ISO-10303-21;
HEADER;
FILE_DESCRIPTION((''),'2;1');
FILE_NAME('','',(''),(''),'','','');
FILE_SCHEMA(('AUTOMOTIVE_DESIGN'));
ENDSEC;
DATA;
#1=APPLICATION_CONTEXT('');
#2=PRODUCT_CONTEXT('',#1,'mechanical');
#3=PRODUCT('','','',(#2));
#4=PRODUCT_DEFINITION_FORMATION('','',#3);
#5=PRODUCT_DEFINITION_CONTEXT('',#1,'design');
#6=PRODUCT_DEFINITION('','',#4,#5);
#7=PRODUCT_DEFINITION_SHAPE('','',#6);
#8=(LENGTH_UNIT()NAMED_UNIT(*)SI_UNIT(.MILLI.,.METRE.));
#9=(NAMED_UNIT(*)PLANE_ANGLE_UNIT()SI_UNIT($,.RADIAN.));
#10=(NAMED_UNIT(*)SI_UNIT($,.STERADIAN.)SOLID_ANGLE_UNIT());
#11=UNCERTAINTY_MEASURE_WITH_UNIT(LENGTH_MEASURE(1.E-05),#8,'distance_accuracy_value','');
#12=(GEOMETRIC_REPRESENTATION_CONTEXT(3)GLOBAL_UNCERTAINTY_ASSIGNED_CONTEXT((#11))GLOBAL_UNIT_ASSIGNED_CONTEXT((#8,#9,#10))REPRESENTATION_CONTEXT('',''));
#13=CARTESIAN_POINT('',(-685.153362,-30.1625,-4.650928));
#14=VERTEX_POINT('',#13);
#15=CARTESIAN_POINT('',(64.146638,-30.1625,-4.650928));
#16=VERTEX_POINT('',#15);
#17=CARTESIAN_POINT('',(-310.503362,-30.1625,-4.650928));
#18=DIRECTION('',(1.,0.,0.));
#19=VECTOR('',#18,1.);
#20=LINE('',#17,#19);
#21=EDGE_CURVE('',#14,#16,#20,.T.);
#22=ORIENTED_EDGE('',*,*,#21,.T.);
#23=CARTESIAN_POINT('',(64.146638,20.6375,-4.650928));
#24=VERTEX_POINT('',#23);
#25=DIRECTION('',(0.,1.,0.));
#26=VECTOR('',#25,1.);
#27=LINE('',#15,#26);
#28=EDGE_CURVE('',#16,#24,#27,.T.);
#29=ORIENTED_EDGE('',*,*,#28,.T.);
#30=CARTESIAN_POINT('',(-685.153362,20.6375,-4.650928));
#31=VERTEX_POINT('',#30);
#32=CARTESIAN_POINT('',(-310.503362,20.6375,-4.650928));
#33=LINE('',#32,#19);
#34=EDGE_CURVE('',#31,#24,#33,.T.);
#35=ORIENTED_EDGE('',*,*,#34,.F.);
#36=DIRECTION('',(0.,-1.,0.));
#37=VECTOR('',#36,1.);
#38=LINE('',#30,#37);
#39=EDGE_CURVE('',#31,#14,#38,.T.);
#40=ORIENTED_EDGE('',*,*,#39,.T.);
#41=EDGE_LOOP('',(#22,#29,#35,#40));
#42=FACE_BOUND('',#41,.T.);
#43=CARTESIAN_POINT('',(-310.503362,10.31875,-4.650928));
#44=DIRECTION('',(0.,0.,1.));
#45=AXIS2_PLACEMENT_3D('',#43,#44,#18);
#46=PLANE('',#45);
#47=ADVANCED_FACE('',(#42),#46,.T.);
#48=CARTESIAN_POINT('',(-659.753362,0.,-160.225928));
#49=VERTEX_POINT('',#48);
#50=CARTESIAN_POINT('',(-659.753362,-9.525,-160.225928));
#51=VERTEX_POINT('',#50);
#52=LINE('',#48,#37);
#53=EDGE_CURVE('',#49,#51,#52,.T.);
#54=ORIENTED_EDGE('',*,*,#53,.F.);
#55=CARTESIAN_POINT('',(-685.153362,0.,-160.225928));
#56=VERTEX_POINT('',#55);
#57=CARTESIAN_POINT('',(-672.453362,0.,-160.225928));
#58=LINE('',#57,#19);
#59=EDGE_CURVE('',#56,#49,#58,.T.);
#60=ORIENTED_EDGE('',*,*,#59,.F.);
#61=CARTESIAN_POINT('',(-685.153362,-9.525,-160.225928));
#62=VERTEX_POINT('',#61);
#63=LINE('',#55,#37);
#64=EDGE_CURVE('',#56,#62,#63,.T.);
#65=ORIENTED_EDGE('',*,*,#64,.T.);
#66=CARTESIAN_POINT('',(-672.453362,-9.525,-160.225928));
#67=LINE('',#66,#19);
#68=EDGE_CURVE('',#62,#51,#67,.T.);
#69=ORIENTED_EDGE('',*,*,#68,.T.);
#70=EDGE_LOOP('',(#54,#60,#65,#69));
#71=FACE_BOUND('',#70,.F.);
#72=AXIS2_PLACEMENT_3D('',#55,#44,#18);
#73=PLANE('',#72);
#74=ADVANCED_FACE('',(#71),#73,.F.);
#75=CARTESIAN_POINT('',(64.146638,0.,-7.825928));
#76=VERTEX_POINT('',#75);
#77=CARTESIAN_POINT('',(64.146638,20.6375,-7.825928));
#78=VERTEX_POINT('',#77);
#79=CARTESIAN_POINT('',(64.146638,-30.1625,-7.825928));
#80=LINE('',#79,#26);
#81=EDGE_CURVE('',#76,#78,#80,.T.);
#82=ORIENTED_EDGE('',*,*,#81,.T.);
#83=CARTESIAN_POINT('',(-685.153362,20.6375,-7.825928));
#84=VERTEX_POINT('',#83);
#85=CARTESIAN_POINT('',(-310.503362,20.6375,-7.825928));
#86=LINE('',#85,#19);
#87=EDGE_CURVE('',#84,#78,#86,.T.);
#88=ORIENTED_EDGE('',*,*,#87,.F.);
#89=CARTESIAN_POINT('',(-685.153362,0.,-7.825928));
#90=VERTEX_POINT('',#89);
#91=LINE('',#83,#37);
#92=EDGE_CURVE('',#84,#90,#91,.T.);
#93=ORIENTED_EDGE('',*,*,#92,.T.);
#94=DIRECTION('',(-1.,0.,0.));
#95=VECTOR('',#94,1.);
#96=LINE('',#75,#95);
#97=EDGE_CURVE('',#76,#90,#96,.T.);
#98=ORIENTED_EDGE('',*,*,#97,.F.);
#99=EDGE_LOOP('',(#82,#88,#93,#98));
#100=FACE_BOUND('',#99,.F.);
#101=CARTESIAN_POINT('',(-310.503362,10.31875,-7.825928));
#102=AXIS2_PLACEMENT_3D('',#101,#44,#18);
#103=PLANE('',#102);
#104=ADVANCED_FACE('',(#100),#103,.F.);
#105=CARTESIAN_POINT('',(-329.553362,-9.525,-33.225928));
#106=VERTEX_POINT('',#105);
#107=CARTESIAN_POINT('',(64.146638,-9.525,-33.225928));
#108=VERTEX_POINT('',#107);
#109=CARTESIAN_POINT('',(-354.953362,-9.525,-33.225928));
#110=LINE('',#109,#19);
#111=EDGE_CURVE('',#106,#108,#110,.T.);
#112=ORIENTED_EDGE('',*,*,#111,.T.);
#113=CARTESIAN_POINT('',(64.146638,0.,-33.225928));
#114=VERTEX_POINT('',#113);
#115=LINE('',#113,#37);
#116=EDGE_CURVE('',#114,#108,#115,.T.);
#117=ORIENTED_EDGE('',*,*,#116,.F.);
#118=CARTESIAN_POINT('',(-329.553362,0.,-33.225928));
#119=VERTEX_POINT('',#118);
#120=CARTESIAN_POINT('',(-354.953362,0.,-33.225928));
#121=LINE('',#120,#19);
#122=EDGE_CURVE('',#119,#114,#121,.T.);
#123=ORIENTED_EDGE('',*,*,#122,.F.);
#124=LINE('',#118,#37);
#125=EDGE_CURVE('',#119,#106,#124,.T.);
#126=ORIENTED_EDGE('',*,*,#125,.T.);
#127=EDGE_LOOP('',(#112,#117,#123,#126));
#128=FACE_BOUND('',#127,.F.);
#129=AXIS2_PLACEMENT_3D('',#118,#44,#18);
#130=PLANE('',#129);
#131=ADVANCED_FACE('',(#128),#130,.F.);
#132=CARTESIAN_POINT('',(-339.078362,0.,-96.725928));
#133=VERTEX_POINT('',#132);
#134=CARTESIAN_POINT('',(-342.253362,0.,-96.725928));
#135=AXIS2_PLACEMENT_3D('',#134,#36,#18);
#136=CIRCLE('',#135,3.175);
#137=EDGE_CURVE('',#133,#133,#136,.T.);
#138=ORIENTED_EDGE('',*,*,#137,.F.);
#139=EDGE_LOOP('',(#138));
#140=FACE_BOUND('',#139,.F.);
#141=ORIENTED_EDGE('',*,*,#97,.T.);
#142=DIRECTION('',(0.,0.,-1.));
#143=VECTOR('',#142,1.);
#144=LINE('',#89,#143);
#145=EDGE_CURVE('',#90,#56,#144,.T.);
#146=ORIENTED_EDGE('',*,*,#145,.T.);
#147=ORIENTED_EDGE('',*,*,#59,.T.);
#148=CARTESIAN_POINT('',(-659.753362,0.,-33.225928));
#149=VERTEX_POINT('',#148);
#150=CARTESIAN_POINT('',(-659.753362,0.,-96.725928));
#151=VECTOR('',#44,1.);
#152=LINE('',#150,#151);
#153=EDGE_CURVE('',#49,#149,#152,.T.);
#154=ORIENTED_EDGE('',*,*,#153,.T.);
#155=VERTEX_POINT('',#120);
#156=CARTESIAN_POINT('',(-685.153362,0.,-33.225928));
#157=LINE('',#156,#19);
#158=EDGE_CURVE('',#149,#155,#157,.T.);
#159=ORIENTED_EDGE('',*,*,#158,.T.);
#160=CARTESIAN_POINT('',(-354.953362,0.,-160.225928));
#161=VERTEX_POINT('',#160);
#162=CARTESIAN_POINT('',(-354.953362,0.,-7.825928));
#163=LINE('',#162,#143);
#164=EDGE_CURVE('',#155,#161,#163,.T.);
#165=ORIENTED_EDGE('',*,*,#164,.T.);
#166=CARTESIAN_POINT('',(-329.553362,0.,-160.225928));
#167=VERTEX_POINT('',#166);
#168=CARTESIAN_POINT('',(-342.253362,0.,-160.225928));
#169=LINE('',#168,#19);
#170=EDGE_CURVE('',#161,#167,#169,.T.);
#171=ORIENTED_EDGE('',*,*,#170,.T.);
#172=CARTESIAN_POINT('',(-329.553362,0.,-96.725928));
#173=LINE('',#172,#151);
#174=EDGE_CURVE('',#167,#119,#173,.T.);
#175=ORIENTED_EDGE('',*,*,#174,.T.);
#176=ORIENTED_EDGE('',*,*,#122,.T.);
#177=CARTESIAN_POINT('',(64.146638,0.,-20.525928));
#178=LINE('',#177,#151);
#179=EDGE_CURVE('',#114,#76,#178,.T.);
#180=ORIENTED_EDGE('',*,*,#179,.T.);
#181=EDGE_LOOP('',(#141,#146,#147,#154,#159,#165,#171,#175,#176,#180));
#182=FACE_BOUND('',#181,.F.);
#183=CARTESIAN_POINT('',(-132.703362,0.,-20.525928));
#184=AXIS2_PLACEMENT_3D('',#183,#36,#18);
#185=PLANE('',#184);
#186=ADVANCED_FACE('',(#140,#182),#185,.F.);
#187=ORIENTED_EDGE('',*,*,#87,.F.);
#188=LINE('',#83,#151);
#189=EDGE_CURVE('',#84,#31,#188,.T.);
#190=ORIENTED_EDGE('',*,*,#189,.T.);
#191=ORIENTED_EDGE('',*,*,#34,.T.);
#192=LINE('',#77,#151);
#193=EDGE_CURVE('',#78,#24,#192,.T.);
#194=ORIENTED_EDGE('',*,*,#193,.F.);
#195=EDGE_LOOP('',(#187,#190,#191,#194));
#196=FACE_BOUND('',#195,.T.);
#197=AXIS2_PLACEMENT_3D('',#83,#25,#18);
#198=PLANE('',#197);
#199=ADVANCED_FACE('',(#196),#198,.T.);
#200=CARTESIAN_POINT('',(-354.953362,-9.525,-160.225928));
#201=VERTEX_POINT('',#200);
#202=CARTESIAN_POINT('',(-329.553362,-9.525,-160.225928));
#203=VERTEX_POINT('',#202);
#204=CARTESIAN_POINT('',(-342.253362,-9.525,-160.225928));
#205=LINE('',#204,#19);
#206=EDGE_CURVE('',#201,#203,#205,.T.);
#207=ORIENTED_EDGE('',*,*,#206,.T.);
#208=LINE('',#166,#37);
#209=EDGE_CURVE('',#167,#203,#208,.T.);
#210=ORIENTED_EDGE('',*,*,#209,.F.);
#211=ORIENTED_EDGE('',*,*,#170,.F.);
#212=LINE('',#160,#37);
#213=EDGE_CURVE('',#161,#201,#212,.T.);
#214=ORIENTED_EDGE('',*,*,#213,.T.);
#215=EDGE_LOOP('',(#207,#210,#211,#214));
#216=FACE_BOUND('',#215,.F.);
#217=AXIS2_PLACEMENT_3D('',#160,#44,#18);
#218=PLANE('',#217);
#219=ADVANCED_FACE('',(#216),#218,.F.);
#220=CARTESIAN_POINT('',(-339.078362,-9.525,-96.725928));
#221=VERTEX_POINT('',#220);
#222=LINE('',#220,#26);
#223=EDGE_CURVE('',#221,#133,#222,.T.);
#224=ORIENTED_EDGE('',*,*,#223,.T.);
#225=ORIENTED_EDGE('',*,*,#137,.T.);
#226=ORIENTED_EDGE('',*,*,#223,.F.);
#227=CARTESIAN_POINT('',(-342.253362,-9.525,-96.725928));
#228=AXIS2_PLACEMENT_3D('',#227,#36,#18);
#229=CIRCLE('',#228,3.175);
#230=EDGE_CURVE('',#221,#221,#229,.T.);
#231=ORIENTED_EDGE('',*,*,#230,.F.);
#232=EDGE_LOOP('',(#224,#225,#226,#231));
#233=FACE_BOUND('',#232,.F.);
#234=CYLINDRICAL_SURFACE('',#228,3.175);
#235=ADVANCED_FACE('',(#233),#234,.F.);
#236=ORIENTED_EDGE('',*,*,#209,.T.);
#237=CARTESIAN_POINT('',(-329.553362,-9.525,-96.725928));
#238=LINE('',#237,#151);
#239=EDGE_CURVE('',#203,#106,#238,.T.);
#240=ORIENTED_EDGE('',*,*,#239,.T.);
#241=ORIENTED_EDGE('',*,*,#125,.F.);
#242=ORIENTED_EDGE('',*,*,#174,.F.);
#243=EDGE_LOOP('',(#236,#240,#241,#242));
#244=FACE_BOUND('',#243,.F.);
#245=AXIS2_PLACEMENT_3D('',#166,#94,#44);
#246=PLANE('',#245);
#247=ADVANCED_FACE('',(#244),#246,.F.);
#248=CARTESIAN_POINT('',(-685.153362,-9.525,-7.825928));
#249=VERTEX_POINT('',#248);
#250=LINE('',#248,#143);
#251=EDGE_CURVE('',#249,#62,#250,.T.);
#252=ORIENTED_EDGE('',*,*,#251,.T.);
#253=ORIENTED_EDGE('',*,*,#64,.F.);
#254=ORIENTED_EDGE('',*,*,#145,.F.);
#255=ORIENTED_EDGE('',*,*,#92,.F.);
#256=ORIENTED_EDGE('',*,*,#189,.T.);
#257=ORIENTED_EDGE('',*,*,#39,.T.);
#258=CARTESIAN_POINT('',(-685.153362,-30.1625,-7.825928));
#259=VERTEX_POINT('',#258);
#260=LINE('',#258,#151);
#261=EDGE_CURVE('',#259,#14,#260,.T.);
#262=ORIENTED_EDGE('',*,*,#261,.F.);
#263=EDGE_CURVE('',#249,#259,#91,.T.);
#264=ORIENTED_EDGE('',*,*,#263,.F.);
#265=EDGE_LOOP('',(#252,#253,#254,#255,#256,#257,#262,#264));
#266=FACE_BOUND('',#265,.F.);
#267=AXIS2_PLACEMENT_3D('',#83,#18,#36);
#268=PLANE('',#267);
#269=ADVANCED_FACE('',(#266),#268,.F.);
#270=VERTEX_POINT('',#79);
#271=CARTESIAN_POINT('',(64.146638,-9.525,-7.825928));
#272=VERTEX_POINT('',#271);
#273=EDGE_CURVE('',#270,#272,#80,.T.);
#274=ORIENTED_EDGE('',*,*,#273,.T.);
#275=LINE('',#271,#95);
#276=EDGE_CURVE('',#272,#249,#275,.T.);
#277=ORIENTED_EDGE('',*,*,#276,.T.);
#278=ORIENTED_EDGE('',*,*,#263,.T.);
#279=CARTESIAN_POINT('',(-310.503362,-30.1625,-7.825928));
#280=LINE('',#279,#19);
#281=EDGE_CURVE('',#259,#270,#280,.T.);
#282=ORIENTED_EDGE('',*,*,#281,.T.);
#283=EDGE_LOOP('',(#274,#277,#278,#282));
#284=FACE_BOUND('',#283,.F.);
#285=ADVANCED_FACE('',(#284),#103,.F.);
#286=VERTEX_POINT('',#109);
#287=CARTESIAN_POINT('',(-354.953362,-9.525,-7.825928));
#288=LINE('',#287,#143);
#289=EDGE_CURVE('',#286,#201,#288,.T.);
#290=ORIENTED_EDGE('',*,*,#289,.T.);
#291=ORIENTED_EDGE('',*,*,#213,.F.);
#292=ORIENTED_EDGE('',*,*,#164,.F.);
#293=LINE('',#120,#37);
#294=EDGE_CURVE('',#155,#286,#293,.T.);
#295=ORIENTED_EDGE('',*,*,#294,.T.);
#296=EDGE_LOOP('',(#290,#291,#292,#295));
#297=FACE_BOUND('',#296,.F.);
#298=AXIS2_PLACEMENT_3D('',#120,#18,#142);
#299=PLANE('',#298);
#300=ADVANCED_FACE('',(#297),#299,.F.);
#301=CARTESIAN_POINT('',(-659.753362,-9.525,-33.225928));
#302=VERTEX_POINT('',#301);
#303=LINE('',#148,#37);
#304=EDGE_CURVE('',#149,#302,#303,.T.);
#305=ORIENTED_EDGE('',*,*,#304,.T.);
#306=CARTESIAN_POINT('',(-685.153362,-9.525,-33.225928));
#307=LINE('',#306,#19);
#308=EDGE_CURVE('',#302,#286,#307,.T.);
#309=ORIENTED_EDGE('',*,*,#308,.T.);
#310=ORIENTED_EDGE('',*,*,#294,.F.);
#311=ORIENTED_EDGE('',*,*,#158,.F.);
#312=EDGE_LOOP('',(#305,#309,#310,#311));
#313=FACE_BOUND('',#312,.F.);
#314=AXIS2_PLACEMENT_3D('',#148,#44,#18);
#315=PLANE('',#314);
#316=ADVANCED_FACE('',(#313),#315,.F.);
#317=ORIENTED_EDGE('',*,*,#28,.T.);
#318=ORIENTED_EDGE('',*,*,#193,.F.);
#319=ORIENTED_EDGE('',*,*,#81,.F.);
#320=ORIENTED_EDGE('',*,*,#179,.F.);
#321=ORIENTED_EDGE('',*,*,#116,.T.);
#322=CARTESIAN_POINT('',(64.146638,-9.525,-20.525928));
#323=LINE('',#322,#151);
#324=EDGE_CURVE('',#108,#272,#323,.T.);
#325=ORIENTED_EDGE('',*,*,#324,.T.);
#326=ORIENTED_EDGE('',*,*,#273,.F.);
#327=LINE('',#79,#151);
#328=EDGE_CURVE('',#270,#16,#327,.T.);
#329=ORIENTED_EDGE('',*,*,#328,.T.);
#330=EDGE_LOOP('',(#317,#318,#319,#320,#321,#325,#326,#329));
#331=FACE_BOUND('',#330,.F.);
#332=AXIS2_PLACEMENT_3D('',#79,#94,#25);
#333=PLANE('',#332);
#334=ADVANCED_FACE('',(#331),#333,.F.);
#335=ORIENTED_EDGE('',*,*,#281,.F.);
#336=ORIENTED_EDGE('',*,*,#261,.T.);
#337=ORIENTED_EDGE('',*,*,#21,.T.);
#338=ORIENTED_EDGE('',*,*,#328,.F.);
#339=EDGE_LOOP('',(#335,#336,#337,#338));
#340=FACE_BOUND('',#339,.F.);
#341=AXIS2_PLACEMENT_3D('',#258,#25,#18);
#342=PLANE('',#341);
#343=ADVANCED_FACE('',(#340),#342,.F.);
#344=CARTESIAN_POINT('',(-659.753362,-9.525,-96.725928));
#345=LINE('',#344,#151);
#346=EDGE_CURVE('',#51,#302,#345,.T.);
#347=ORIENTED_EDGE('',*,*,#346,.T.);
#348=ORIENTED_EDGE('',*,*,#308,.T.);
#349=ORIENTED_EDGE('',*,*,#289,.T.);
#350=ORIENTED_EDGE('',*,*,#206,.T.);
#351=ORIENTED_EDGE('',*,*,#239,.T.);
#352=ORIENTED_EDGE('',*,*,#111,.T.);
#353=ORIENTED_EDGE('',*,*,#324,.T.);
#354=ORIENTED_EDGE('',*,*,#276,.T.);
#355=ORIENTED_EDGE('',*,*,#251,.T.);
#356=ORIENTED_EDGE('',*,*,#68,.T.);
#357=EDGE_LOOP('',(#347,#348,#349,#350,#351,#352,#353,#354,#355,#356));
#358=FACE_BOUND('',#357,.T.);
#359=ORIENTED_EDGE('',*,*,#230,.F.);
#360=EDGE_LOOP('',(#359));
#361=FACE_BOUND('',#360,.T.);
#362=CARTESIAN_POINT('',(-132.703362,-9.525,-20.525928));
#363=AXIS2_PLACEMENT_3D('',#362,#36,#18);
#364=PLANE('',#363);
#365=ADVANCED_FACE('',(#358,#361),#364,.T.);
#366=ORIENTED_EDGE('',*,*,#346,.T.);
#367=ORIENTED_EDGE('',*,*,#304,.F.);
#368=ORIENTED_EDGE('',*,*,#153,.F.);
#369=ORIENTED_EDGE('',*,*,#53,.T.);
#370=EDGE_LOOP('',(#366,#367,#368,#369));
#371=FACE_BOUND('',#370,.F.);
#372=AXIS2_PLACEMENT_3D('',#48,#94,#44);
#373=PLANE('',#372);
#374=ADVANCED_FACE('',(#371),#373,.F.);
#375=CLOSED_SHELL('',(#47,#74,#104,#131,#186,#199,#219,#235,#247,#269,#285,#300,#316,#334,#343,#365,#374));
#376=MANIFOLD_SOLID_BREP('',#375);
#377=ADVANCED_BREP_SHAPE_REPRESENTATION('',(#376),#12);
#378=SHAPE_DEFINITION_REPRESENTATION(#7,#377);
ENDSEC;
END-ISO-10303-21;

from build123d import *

# Parameters (mm, degrees)
F0_W     = 393.7
F0_H     = 25.4
F0_W_2   = 25.4
F0_H_2   = 127
F0_W_3   = 304.8
F1_DEPTH = 9.525
F2_W     = 749.3
F2_H     = 20.6375
F2_H_2   = 9.525
F3_DEPTH = 3.175
F4_R     = 3.175
F5_DEPTH = 30.1635


with BuildPart() as f1:
    # F0 (on Front) → F1 (new body)
    with BuildSketch(Plane.XZ):
        with Locations((-132.7033620834, -20.5259278297)):
            Rectangle(F0_W, F0_H)
        with Locations((-342.2533620834, -20.5259278297)):
            Rectangle(F0_W_2, F0_H)
        with Locations((-342.2533620834, -96.7259278297)):
            Rectangle(F0_W_2, F0_H_2)
        with Locations((-507.3533620834, -20.5259278297)):
            Rectangle(F0_W_3, F0_H)
        with Locations((-672.4533620834, -20.5259278297)):
            Rectangle(F0_W_2, F0_H)
        with Locations((-672.4533620834, -96.7259278297)):
            Rectangle(F0_W_2, F0_H_2)
    extrude(amount=F1_DEPTH)

    # F2 (on face) → F3 (join)
    with BuildSketch(Plane.XY.offset(-7.8259278297)):
        with Locations((-310.5033620834, 10.31875)):
            Rectangle(F2_W, F2_H)
        with Locations((-310.5033620834, -4.7625)):
            Rectangle(F2_W, F2_H_2)
        with Locations((-310.5033620834, -19.84375)):
            Rectangle(F2_W, F2_H)
    extrude(amount=F3_DEPTH)

    # F4 (on face) → F5 (cut, through all)
    with BuildSketch(Plane.XZ.offset(9.525)):
        with Locations((-342.2533620834, -96.7259278297)):
            Circle(F4_R)
    extrude(amount=-F5_DEPTH, mode=Mode.SUBTRACT)


solid = f1.part
